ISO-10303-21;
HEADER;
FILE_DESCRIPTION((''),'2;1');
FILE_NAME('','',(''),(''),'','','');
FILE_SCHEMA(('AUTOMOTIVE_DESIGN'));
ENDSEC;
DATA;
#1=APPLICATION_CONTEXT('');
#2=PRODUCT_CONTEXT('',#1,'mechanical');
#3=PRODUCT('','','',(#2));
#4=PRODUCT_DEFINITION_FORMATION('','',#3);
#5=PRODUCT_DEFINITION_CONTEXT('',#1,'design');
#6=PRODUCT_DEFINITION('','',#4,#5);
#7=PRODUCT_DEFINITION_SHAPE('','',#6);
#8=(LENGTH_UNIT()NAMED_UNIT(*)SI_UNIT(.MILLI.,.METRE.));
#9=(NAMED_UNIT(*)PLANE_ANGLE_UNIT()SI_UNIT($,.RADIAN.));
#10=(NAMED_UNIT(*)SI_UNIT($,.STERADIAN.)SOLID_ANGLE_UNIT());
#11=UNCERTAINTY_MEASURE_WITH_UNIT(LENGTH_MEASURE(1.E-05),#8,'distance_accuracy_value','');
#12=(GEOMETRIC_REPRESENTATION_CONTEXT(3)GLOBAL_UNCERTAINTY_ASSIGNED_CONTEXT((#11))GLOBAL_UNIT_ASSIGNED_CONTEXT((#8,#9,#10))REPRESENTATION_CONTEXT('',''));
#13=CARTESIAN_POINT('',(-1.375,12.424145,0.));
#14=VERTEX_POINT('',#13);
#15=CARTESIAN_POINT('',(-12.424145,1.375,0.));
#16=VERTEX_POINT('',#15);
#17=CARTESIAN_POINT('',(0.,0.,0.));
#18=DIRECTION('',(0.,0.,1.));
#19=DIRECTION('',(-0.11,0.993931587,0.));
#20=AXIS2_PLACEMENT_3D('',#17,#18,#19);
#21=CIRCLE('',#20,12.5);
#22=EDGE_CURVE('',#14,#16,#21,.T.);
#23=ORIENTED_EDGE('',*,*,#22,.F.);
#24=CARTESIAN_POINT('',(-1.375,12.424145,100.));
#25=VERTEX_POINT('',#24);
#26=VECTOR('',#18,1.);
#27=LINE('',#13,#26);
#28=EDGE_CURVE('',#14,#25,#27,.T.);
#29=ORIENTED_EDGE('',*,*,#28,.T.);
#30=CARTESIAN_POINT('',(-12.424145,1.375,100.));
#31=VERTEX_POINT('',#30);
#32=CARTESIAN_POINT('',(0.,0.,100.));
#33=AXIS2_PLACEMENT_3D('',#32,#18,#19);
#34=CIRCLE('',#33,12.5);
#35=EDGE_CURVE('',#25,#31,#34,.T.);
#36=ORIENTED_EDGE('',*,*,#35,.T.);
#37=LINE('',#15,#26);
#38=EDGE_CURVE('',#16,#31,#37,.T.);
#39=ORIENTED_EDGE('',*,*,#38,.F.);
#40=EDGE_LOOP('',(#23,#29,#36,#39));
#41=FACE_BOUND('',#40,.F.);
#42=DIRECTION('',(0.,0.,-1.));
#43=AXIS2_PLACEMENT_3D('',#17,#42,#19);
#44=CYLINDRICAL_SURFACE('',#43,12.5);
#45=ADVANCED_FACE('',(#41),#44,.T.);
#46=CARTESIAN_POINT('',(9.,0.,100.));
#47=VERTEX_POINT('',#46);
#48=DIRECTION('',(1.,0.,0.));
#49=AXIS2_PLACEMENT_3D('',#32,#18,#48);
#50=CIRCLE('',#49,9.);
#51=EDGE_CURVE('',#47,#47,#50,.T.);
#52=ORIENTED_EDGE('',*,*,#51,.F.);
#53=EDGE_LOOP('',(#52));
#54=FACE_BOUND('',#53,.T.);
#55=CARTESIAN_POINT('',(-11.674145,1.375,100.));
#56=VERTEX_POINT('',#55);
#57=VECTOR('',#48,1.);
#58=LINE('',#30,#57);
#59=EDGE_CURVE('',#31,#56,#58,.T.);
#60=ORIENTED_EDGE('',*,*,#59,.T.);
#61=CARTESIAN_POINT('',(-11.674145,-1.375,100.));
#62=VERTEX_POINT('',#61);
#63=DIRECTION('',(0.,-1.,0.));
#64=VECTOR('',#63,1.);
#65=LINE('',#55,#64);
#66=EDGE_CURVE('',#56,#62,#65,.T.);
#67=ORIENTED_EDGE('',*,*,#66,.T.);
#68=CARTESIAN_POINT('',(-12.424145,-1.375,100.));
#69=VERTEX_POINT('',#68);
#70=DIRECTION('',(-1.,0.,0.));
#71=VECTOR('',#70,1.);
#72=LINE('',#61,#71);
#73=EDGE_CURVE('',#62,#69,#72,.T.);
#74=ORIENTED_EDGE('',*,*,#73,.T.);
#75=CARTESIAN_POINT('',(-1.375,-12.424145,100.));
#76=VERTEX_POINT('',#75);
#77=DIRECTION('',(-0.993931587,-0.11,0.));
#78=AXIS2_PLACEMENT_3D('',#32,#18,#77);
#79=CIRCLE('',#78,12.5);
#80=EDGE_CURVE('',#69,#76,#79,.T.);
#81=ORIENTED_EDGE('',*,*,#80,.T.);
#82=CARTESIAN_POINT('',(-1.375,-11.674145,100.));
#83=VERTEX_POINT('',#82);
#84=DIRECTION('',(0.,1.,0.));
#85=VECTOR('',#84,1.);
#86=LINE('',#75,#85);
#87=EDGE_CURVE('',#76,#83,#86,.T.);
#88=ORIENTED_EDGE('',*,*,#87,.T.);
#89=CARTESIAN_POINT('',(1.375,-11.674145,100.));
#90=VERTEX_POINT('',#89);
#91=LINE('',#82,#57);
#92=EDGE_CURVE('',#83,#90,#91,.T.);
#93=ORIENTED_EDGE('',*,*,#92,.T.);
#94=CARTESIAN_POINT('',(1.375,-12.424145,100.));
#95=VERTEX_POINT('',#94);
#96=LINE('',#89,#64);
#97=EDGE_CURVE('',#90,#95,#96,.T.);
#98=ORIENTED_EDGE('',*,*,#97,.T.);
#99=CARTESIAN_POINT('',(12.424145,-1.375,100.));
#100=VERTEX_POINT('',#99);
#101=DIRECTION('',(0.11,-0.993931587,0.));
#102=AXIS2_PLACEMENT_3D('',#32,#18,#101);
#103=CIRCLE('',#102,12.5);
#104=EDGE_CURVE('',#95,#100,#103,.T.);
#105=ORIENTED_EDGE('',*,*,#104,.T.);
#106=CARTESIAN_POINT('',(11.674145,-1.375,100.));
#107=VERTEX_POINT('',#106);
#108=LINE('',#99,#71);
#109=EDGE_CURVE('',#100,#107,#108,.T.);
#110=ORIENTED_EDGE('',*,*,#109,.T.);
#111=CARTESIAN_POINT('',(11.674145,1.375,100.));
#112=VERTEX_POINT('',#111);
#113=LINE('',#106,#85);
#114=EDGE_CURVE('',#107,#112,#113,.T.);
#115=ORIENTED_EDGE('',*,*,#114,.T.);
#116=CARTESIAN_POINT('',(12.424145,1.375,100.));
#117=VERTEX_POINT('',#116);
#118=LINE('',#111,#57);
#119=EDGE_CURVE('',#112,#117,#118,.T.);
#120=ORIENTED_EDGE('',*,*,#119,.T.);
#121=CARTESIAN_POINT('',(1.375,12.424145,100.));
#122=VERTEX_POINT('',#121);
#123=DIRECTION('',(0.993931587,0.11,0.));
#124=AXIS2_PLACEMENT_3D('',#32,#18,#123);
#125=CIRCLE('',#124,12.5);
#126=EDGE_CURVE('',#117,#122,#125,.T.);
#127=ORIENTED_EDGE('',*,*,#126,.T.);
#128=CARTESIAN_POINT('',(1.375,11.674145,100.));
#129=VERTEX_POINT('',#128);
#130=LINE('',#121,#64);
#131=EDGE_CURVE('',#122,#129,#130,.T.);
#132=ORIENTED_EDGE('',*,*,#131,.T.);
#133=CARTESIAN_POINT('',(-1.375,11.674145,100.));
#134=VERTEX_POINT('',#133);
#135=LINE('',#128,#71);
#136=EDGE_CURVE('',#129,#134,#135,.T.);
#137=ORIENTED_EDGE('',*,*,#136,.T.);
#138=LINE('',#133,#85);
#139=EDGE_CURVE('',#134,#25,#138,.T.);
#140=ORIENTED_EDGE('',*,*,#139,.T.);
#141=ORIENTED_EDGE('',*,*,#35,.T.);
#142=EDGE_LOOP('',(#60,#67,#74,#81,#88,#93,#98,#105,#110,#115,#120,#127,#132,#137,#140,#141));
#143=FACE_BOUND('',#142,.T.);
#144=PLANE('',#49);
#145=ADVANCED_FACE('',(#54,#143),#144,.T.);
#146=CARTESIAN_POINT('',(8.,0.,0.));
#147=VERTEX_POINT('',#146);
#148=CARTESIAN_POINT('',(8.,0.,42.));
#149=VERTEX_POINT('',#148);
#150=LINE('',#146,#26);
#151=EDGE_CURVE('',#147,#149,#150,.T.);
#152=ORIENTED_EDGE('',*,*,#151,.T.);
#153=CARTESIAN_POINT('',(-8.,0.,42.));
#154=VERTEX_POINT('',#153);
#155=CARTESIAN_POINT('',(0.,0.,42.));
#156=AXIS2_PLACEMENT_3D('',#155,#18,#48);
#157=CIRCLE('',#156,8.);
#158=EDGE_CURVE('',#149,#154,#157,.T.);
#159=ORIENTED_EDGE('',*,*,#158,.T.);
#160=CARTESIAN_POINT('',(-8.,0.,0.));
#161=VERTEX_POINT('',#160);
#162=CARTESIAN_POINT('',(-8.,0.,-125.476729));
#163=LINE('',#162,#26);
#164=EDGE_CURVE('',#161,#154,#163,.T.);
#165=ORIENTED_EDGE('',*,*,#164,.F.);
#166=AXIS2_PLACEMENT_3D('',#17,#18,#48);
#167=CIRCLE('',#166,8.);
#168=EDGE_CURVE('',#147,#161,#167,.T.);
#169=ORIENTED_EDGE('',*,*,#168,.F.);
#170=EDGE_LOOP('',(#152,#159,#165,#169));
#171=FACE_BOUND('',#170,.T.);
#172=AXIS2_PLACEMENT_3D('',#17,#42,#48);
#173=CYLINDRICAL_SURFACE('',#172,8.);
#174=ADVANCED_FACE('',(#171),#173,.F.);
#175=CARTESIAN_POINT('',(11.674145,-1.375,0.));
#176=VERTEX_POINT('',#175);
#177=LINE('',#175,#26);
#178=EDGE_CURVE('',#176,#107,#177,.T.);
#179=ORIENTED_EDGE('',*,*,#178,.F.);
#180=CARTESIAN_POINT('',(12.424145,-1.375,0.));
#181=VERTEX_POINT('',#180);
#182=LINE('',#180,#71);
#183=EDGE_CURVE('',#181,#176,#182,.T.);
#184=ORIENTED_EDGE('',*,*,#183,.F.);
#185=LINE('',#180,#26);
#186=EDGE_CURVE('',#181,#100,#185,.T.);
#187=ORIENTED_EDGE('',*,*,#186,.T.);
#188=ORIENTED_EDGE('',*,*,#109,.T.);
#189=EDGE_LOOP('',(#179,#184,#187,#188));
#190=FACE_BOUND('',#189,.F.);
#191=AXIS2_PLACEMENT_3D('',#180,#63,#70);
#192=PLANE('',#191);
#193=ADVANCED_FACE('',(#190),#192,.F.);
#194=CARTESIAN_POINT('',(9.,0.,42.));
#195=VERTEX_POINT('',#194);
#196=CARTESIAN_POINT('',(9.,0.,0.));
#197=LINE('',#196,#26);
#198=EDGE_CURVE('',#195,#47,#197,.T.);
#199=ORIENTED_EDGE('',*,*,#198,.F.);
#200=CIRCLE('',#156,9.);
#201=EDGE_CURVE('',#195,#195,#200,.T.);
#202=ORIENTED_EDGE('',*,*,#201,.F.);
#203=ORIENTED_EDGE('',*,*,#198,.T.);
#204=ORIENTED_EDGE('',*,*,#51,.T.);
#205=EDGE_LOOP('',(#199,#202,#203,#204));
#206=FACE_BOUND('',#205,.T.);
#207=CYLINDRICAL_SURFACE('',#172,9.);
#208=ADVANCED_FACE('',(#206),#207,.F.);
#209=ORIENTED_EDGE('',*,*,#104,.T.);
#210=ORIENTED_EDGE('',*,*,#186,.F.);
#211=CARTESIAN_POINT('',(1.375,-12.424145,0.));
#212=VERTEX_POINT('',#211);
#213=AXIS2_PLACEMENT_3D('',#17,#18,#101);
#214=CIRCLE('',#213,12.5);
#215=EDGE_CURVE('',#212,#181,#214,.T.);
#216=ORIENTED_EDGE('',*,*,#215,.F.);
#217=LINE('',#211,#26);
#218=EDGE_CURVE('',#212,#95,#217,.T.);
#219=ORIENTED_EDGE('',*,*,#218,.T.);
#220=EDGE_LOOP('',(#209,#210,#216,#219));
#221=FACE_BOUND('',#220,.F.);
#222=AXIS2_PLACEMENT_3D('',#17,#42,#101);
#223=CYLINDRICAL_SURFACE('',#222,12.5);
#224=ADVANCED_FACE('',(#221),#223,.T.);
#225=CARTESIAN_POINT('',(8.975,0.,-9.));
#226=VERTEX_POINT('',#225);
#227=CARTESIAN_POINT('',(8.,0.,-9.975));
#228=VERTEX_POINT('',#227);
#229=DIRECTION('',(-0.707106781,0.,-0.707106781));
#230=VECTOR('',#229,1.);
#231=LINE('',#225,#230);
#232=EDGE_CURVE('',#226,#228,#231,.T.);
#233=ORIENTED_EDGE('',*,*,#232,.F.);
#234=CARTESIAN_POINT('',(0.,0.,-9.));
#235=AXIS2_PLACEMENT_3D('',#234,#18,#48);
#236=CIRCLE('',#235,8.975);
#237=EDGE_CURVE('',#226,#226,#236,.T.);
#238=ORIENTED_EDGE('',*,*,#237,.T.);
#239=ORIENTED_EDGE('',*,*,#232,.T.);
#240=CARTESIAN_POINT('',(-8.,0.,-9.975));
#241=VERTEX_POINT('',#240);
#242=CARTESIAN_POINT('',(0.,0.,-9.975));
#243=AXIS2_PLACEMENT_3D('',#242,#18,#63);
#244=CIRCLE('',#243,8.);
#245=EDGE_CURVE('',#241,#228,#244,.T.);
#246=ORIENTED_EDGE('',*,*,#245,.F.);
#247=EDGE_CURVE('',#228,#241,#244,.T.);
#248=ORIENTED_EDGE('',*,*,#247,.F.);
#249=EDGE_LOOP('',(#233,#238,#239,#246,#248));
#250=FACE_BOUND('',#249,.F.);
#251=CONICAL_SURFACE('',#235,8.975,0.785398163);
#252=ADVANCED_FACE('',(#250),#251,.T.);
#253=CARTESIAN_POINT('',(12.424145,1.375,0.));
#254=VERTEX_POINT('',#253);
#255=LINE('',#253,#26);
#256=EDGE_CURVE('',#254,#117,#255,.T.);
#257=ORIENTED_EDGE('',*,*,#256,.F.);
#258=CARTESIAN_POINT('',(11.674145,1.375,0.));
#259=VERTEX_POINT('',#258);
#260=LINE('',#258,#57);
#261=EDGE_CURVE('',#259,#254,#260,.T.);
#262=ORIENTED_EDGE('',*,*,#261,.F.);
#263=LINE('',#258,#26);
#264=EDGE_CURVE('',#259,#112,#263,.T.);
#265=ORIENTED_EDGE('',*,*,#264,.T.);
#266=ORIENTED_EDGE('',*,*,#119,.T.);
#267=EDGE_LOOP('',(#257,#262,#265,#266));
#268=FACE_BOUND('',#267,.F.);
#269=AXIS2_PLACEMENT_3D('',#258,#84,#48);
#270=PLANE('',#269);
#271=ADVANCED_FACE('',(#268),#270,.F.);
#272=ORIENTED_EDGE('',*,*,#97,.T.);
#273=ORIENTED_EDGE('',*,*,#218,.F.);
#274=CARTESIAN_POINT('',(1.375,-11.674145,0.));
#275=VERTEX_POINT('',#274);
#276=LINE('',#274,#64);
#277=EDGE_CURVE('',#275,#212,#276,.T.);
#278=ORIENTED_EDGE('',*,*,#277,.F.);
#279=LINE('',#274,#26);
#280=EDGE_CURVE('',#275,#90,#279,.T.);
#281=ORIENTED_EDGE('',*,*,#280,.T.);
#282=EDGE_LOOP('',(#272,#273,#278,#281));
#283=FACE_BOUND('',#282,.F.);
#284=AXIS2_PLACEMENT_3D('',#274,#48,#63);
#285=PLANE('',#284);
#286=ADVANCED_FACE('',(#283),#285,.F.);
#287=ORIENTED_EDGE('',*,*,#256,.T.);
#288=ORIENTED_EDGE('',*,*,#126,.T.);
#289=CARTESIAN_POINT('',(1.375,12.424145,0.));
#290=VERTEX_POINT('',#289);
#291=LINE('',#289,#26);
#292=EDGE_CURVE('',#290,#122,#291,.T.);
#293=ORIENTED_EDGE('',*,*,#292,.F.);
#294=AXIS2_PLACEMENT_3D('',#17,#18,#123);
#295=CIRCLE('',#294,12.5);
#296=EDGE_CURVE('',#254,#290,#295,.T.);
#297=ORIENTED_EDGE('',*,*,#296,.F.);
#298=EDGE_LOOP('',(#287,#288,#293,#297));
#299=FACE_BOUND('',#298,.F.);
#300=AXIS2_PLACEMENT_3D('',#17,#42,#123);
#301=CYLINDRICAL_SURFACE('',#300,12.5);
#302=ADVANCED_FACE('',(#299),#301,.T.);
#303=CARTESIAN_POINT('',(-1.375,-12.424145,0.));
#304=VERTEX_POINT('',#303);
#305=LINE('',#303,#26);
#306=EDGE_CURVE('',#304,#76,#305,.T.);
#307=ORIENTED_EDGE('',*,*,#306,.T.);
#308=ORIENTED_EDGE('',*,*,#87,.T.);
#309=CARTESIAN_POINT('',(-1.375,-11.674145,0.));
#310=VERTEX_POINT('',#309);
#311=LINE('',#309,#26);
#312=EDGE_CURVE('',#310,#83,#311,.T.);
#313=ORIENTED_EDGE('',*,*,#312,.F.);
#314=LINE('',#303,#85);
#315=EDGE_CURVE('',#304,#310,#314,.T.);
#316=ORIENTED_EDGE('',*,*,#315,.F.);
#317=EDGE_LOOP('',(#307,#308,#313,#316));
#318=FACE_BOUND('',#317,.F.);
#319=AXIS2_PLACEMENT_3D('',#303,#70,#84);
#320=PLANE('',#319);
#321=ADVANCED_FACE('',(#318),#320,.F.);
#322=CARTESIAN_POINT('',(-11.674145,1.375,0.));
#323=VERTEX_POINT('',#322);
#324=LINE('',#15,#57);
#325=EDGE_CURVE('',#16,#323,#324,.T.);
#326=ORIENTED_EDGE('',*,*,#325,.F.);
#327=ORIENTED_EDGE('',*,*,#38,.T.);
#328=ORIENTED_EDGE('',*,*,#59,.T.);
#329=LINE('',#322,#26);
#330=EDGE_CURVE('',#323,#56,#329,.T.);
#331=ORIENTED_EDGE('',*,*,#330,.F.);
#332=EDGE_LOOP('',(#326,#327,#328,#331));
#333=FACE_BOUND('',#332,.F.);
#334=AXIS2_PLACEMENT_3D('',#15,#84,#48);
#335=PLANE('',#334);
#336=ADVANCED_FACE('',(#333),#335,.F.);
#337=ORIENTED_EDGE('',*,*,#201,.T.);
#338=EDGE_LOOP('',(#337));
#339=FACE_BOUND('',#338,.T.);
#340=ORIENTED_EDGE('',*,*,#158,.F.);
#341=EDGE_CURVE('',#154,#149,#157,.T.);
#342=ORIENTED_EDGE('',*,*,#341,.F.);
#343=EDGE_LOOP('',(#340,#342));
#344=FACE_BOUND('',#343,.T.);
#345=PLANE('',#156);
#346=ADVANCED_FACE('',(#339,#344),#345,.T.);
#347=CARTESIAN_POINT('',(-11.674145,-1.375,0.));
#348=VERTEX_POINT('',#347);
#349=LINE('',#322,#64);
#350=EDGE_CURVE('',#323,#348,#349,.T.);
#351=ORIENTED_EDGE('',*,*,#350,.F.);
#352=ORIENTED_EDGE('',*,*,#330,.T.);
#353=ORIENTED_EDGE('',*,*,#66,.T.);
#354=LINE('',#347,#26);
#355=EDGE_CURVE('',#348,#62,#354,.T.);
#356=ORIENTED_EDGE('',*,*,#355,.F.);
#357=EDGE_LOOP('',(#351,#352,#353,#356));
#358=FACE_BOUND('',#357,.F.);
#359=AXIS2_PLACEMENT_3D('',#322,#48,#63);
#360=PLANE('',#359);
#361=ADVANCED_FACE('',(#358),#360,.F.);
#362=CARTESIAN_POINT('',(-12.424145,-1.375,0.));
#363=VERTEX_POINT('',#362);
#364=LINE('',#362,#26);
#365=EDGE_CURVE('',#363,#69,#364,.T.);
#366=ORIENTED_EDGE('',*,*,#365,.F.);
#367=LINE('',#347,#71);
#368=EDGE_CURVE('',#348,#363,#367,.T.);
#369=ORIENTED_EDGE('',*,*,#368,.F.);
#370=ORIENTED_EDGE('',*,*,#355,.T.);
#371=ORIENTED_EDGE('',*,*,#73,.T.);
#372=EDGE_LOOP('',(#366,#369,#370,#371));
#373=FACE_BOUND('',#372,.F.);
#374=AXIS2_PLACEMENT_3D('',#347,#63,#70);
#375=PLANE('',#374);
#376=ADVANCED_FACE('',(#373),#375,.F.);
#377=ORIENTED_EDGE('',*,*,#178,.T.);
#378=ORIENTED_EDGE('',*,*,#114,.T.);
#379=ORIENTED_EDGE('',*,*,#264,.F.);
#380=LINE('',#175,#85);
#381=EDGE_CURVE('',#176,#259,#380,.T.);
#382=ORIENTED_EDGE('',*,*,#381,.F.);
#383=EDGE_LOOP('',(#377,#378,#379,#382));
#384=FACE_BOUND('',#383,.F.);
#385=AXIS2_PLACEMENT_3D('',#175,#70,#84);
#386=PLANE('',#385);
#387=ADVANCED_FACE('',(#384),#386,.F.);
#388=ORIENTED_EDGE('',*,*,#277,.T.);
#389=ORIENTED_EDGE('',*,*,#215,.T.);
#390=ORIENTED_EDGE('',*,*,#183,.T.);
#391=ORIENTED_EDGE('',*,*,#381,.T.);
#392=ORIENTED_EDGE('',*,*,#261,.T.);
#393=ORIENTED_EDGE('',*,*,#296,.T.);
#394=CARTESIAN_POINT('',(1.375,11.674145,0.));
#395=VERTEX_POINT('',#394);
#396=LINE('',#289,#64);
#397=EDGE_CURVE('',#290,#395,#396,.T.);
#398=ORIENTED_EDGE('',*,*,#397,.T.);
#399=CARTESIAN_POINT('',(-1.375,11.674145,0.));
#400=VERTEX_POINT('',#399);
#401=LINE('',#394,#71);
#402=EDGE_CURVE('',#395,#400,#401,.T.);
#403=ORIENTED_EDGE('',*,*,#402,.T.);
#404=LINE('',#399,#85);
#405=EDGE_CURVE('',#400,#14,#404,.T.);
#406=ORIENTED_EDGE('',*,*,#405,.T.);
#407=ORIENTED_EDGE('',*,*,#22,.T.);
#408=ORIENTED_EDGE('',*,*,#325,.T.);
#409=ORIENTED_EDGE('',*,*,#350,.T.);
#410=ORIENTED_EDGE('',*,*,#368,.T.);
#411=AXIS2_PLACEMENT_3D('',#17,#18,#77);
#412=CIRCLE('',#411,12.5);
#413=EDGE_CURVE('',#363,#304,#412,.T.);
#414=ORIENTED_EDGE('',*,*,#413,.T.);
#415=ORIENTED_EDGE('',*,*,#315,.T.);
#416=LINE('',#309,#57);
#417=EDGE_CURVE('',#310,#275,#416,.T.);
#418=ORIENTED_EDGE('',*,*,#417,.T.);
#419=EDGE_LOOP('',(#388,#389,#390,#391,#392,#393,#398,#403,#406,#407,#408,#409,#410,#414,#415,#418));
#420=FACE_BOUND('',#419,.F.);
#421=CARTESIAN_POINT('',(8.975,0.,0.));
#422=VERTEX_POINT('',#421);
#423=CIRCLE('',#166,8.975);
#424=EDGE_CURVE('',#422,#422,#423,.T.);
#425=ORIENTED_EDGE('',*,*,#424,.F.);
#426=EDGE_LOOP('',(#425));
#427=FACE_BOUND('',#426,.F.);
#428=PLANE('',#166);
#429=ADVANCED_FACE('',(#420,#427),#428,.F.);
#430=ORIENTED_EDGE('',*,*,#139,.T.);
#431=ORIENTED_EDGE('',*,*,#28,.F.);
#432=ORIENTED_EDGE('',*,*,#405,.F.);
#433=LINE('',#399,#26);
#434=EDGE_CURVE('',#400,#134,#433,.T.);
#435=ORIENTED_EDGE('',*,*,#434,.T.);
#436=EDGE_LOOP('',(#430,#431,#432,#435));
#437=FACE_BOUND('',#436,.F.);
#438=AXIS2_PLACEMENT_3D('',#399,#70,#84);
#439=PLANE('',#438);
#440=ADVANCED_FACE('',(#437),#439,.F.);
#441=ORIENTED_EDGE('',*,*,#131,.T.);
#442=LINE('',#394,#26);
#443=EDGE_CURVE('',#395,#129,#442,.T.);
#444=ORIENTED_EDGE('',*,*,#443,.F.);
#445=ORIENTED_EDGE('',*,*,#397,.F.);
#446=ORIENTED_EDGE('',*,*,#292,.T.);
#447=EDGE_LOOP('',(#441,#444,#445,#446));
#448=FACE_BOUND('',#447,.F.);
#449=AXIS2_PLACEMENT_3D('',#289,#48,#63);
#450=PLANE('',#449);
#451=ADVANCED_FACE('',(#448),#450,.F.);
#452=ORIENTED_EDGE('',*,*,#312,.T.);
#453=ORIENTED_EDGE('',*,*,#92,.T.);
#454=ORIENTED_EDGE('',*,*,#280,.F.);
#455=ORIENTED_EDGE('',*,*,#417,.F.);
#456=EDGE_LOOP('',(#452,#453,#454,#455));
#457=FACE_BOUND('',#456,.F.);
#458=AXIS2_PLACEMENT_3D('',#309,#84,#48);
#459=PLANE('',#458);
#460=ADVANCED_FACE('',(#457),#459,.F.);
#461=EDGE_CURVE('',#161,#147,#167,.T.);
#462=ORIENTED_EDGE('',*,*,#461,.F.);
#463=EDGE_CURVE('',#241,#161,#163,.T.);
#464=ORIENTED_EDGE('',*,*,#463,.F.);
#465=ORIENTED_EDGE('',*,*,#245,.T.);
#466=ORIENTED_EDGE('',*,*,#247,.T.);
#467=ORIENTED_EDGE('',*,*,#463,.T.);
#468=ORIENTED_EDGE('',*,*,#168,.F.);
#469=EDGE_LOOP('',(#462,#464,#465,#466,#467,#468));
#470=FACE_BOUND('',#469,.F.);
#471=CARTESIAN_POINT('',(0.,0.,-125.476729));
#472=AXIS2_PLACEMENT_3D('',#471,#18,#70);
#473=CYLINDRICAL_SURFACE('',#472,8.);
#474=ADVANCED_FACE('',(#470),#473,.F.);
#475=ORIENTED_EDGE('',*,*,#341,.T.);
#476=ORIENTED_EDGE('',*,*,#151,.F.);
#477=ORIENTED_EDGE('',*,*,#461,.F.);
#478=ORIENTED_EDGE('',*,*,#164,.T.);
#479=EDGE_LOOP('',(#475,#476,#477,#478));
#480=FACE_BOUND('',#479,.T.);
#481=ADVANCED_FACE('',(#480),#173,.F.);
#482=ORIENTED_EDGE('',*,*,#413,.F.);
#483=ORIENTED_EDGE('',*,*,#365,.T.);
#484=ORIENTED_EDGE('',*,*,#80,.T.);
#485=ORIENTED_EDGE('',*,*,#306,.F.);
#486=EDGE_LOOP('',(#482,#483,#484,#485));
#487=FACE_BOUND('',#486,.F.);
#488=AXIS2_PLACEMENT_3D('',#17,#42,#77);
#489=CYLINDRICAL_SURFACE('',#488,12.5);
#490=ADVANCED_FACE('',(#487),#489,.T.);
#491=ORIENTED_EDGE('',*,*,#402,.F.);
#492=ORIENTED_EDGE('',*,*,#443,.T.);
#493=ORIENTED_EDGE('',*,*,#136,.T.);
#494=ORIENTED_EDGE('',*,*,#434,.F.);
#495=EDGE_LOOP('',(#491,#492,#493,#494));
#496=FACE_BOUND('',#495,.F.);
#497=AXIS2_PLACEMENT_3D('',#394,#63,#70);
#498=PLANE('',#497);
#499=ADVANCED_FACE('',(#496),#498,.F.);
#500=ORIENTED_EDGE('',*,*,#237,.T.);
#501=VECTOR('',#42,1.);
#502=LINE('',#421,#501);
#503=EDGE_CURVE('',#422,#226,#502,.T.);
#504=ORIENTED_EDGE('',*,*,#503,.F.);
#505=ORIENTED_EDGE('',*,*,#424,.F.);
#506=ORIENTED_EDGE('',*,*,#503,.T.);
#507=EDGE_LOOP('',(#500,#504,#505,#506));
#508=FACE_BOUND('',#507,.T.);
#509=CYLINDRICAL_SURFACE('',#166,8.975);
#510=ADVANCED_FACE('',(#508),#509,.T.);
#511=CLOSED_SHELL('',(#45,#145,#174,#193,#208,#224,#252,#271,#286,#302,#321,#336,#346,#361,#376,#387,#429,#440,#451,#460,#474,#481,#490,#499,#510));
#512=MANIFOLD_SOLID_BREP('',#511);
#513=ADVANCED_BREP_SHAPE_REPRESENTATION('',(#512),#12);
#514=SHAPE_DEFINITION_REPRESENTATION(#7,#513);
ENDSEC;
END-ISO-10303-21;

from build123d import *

# Parameters (mm, degrees)
F0_R     = 9
F1_DEPTH = 100
F2_R     = 9
F2_R_2   = 8
F3_DEPTH = 42
F4_R     = 8.975
F5_DEPTH = 10
F7_D     = 16


# Not quite as in the source:
# - a fillet or chamfer that OpenCascade refuses, or shapes differently, is made with other operations: its cross-section is extruded or revolved along the edge and cut away or added


with BuildPart() as f1:
    # F0 (on Top) → F1 (new body)
    with BuildSketch(Plane.XY):
        with BuildLine():
            Line((11.6741448398, 1.375), (12.4241448398, 1.375))
            ThreePointArc((12.4241448398, 1.375), (8.8388347648, 8.8388347648), (1.375, 12.4241448398))
            Line((1.375, 12.4241448398), (1.375, 11.6741448398))
            Line((1.375, 11.6741448398), (-1.375, 11.6741448398))
            Line((-1.375, 11.6741448398), (-1.375, 12.4241448398))
            ThreePointArc((-1.375, 12.4241448398), (-8.8388347648, 8.8388347648), (-12.4241448398, 1.375))
            Line((-12.4241448398, 1.375), (-11.6741448398, 1.375))
            Line((-11.6741448398, 1.375), (-11.6741448398, -1.375))
            Line((-11.6741448398, -1.375), (-12.4241448398, -1.375))
            ThreePointArc((-12.4241448398, -1.375), (-8.8388347648, -8.8388347648), (-1.375, -12.4241448398))
            Line((-1.375, -12.4241448398), (-1.375, -11.6741448398))
            Line((-1.375, -11.6741448398), (1.375, -11.6741448398))
            Line((1.375, -11.6741448398), (1.375, -12.4241448398))
            ThreePointArc((1.375, -12.4241448398), (8.8388347648, -8.8388347648), (12.4241448398, -1.375))
            Line((12.4241448398, -1.375), (11.6741448398, -1.375))
            Line((11.6741448398, -1.375), (11.6741448398, 1.375))
        make_face()
        Circle(F0_R, mode=Mode.SUBTRACT)
    extrude(amount=F1_DEPTH)

    # F2 (on Top) → F3 (join)
    with BuildSketch(Plane.XY):
        Circle(F2_R)
        Circle(F2_R_2, mode=Mode.SUBTRACT)
    extrude(amount=F3_DEPTH)

    # F4 (on Top) → F5 (join)
    with BuildSketch(Plane.XY):
        Circle(F4_R)
    extrude(amount=-F5_DEPTH)

    # F7 (through all)
    with Locations(Plane(origin=(0, 0, -10), x_dir=(1, 0, 0), z_dir=(0, 0, -1))):
        with Locations((0, 0)):
            Hole(F7_D / 2)

    # F8: chamfer of 1 on 1 edges, made by hand

    # F8_s1 → F8_t2 (revolve, cut)
    with BuildSketch(Plane.XZ):
        Polygon((8.975, -9), (7.975, -10), (8.975, -10), align=None)
    revolve(axis=Axis((0, 0, -10), (0, 0, 1)), mode=Mode.SUBTRACT)


solid = f1.part
